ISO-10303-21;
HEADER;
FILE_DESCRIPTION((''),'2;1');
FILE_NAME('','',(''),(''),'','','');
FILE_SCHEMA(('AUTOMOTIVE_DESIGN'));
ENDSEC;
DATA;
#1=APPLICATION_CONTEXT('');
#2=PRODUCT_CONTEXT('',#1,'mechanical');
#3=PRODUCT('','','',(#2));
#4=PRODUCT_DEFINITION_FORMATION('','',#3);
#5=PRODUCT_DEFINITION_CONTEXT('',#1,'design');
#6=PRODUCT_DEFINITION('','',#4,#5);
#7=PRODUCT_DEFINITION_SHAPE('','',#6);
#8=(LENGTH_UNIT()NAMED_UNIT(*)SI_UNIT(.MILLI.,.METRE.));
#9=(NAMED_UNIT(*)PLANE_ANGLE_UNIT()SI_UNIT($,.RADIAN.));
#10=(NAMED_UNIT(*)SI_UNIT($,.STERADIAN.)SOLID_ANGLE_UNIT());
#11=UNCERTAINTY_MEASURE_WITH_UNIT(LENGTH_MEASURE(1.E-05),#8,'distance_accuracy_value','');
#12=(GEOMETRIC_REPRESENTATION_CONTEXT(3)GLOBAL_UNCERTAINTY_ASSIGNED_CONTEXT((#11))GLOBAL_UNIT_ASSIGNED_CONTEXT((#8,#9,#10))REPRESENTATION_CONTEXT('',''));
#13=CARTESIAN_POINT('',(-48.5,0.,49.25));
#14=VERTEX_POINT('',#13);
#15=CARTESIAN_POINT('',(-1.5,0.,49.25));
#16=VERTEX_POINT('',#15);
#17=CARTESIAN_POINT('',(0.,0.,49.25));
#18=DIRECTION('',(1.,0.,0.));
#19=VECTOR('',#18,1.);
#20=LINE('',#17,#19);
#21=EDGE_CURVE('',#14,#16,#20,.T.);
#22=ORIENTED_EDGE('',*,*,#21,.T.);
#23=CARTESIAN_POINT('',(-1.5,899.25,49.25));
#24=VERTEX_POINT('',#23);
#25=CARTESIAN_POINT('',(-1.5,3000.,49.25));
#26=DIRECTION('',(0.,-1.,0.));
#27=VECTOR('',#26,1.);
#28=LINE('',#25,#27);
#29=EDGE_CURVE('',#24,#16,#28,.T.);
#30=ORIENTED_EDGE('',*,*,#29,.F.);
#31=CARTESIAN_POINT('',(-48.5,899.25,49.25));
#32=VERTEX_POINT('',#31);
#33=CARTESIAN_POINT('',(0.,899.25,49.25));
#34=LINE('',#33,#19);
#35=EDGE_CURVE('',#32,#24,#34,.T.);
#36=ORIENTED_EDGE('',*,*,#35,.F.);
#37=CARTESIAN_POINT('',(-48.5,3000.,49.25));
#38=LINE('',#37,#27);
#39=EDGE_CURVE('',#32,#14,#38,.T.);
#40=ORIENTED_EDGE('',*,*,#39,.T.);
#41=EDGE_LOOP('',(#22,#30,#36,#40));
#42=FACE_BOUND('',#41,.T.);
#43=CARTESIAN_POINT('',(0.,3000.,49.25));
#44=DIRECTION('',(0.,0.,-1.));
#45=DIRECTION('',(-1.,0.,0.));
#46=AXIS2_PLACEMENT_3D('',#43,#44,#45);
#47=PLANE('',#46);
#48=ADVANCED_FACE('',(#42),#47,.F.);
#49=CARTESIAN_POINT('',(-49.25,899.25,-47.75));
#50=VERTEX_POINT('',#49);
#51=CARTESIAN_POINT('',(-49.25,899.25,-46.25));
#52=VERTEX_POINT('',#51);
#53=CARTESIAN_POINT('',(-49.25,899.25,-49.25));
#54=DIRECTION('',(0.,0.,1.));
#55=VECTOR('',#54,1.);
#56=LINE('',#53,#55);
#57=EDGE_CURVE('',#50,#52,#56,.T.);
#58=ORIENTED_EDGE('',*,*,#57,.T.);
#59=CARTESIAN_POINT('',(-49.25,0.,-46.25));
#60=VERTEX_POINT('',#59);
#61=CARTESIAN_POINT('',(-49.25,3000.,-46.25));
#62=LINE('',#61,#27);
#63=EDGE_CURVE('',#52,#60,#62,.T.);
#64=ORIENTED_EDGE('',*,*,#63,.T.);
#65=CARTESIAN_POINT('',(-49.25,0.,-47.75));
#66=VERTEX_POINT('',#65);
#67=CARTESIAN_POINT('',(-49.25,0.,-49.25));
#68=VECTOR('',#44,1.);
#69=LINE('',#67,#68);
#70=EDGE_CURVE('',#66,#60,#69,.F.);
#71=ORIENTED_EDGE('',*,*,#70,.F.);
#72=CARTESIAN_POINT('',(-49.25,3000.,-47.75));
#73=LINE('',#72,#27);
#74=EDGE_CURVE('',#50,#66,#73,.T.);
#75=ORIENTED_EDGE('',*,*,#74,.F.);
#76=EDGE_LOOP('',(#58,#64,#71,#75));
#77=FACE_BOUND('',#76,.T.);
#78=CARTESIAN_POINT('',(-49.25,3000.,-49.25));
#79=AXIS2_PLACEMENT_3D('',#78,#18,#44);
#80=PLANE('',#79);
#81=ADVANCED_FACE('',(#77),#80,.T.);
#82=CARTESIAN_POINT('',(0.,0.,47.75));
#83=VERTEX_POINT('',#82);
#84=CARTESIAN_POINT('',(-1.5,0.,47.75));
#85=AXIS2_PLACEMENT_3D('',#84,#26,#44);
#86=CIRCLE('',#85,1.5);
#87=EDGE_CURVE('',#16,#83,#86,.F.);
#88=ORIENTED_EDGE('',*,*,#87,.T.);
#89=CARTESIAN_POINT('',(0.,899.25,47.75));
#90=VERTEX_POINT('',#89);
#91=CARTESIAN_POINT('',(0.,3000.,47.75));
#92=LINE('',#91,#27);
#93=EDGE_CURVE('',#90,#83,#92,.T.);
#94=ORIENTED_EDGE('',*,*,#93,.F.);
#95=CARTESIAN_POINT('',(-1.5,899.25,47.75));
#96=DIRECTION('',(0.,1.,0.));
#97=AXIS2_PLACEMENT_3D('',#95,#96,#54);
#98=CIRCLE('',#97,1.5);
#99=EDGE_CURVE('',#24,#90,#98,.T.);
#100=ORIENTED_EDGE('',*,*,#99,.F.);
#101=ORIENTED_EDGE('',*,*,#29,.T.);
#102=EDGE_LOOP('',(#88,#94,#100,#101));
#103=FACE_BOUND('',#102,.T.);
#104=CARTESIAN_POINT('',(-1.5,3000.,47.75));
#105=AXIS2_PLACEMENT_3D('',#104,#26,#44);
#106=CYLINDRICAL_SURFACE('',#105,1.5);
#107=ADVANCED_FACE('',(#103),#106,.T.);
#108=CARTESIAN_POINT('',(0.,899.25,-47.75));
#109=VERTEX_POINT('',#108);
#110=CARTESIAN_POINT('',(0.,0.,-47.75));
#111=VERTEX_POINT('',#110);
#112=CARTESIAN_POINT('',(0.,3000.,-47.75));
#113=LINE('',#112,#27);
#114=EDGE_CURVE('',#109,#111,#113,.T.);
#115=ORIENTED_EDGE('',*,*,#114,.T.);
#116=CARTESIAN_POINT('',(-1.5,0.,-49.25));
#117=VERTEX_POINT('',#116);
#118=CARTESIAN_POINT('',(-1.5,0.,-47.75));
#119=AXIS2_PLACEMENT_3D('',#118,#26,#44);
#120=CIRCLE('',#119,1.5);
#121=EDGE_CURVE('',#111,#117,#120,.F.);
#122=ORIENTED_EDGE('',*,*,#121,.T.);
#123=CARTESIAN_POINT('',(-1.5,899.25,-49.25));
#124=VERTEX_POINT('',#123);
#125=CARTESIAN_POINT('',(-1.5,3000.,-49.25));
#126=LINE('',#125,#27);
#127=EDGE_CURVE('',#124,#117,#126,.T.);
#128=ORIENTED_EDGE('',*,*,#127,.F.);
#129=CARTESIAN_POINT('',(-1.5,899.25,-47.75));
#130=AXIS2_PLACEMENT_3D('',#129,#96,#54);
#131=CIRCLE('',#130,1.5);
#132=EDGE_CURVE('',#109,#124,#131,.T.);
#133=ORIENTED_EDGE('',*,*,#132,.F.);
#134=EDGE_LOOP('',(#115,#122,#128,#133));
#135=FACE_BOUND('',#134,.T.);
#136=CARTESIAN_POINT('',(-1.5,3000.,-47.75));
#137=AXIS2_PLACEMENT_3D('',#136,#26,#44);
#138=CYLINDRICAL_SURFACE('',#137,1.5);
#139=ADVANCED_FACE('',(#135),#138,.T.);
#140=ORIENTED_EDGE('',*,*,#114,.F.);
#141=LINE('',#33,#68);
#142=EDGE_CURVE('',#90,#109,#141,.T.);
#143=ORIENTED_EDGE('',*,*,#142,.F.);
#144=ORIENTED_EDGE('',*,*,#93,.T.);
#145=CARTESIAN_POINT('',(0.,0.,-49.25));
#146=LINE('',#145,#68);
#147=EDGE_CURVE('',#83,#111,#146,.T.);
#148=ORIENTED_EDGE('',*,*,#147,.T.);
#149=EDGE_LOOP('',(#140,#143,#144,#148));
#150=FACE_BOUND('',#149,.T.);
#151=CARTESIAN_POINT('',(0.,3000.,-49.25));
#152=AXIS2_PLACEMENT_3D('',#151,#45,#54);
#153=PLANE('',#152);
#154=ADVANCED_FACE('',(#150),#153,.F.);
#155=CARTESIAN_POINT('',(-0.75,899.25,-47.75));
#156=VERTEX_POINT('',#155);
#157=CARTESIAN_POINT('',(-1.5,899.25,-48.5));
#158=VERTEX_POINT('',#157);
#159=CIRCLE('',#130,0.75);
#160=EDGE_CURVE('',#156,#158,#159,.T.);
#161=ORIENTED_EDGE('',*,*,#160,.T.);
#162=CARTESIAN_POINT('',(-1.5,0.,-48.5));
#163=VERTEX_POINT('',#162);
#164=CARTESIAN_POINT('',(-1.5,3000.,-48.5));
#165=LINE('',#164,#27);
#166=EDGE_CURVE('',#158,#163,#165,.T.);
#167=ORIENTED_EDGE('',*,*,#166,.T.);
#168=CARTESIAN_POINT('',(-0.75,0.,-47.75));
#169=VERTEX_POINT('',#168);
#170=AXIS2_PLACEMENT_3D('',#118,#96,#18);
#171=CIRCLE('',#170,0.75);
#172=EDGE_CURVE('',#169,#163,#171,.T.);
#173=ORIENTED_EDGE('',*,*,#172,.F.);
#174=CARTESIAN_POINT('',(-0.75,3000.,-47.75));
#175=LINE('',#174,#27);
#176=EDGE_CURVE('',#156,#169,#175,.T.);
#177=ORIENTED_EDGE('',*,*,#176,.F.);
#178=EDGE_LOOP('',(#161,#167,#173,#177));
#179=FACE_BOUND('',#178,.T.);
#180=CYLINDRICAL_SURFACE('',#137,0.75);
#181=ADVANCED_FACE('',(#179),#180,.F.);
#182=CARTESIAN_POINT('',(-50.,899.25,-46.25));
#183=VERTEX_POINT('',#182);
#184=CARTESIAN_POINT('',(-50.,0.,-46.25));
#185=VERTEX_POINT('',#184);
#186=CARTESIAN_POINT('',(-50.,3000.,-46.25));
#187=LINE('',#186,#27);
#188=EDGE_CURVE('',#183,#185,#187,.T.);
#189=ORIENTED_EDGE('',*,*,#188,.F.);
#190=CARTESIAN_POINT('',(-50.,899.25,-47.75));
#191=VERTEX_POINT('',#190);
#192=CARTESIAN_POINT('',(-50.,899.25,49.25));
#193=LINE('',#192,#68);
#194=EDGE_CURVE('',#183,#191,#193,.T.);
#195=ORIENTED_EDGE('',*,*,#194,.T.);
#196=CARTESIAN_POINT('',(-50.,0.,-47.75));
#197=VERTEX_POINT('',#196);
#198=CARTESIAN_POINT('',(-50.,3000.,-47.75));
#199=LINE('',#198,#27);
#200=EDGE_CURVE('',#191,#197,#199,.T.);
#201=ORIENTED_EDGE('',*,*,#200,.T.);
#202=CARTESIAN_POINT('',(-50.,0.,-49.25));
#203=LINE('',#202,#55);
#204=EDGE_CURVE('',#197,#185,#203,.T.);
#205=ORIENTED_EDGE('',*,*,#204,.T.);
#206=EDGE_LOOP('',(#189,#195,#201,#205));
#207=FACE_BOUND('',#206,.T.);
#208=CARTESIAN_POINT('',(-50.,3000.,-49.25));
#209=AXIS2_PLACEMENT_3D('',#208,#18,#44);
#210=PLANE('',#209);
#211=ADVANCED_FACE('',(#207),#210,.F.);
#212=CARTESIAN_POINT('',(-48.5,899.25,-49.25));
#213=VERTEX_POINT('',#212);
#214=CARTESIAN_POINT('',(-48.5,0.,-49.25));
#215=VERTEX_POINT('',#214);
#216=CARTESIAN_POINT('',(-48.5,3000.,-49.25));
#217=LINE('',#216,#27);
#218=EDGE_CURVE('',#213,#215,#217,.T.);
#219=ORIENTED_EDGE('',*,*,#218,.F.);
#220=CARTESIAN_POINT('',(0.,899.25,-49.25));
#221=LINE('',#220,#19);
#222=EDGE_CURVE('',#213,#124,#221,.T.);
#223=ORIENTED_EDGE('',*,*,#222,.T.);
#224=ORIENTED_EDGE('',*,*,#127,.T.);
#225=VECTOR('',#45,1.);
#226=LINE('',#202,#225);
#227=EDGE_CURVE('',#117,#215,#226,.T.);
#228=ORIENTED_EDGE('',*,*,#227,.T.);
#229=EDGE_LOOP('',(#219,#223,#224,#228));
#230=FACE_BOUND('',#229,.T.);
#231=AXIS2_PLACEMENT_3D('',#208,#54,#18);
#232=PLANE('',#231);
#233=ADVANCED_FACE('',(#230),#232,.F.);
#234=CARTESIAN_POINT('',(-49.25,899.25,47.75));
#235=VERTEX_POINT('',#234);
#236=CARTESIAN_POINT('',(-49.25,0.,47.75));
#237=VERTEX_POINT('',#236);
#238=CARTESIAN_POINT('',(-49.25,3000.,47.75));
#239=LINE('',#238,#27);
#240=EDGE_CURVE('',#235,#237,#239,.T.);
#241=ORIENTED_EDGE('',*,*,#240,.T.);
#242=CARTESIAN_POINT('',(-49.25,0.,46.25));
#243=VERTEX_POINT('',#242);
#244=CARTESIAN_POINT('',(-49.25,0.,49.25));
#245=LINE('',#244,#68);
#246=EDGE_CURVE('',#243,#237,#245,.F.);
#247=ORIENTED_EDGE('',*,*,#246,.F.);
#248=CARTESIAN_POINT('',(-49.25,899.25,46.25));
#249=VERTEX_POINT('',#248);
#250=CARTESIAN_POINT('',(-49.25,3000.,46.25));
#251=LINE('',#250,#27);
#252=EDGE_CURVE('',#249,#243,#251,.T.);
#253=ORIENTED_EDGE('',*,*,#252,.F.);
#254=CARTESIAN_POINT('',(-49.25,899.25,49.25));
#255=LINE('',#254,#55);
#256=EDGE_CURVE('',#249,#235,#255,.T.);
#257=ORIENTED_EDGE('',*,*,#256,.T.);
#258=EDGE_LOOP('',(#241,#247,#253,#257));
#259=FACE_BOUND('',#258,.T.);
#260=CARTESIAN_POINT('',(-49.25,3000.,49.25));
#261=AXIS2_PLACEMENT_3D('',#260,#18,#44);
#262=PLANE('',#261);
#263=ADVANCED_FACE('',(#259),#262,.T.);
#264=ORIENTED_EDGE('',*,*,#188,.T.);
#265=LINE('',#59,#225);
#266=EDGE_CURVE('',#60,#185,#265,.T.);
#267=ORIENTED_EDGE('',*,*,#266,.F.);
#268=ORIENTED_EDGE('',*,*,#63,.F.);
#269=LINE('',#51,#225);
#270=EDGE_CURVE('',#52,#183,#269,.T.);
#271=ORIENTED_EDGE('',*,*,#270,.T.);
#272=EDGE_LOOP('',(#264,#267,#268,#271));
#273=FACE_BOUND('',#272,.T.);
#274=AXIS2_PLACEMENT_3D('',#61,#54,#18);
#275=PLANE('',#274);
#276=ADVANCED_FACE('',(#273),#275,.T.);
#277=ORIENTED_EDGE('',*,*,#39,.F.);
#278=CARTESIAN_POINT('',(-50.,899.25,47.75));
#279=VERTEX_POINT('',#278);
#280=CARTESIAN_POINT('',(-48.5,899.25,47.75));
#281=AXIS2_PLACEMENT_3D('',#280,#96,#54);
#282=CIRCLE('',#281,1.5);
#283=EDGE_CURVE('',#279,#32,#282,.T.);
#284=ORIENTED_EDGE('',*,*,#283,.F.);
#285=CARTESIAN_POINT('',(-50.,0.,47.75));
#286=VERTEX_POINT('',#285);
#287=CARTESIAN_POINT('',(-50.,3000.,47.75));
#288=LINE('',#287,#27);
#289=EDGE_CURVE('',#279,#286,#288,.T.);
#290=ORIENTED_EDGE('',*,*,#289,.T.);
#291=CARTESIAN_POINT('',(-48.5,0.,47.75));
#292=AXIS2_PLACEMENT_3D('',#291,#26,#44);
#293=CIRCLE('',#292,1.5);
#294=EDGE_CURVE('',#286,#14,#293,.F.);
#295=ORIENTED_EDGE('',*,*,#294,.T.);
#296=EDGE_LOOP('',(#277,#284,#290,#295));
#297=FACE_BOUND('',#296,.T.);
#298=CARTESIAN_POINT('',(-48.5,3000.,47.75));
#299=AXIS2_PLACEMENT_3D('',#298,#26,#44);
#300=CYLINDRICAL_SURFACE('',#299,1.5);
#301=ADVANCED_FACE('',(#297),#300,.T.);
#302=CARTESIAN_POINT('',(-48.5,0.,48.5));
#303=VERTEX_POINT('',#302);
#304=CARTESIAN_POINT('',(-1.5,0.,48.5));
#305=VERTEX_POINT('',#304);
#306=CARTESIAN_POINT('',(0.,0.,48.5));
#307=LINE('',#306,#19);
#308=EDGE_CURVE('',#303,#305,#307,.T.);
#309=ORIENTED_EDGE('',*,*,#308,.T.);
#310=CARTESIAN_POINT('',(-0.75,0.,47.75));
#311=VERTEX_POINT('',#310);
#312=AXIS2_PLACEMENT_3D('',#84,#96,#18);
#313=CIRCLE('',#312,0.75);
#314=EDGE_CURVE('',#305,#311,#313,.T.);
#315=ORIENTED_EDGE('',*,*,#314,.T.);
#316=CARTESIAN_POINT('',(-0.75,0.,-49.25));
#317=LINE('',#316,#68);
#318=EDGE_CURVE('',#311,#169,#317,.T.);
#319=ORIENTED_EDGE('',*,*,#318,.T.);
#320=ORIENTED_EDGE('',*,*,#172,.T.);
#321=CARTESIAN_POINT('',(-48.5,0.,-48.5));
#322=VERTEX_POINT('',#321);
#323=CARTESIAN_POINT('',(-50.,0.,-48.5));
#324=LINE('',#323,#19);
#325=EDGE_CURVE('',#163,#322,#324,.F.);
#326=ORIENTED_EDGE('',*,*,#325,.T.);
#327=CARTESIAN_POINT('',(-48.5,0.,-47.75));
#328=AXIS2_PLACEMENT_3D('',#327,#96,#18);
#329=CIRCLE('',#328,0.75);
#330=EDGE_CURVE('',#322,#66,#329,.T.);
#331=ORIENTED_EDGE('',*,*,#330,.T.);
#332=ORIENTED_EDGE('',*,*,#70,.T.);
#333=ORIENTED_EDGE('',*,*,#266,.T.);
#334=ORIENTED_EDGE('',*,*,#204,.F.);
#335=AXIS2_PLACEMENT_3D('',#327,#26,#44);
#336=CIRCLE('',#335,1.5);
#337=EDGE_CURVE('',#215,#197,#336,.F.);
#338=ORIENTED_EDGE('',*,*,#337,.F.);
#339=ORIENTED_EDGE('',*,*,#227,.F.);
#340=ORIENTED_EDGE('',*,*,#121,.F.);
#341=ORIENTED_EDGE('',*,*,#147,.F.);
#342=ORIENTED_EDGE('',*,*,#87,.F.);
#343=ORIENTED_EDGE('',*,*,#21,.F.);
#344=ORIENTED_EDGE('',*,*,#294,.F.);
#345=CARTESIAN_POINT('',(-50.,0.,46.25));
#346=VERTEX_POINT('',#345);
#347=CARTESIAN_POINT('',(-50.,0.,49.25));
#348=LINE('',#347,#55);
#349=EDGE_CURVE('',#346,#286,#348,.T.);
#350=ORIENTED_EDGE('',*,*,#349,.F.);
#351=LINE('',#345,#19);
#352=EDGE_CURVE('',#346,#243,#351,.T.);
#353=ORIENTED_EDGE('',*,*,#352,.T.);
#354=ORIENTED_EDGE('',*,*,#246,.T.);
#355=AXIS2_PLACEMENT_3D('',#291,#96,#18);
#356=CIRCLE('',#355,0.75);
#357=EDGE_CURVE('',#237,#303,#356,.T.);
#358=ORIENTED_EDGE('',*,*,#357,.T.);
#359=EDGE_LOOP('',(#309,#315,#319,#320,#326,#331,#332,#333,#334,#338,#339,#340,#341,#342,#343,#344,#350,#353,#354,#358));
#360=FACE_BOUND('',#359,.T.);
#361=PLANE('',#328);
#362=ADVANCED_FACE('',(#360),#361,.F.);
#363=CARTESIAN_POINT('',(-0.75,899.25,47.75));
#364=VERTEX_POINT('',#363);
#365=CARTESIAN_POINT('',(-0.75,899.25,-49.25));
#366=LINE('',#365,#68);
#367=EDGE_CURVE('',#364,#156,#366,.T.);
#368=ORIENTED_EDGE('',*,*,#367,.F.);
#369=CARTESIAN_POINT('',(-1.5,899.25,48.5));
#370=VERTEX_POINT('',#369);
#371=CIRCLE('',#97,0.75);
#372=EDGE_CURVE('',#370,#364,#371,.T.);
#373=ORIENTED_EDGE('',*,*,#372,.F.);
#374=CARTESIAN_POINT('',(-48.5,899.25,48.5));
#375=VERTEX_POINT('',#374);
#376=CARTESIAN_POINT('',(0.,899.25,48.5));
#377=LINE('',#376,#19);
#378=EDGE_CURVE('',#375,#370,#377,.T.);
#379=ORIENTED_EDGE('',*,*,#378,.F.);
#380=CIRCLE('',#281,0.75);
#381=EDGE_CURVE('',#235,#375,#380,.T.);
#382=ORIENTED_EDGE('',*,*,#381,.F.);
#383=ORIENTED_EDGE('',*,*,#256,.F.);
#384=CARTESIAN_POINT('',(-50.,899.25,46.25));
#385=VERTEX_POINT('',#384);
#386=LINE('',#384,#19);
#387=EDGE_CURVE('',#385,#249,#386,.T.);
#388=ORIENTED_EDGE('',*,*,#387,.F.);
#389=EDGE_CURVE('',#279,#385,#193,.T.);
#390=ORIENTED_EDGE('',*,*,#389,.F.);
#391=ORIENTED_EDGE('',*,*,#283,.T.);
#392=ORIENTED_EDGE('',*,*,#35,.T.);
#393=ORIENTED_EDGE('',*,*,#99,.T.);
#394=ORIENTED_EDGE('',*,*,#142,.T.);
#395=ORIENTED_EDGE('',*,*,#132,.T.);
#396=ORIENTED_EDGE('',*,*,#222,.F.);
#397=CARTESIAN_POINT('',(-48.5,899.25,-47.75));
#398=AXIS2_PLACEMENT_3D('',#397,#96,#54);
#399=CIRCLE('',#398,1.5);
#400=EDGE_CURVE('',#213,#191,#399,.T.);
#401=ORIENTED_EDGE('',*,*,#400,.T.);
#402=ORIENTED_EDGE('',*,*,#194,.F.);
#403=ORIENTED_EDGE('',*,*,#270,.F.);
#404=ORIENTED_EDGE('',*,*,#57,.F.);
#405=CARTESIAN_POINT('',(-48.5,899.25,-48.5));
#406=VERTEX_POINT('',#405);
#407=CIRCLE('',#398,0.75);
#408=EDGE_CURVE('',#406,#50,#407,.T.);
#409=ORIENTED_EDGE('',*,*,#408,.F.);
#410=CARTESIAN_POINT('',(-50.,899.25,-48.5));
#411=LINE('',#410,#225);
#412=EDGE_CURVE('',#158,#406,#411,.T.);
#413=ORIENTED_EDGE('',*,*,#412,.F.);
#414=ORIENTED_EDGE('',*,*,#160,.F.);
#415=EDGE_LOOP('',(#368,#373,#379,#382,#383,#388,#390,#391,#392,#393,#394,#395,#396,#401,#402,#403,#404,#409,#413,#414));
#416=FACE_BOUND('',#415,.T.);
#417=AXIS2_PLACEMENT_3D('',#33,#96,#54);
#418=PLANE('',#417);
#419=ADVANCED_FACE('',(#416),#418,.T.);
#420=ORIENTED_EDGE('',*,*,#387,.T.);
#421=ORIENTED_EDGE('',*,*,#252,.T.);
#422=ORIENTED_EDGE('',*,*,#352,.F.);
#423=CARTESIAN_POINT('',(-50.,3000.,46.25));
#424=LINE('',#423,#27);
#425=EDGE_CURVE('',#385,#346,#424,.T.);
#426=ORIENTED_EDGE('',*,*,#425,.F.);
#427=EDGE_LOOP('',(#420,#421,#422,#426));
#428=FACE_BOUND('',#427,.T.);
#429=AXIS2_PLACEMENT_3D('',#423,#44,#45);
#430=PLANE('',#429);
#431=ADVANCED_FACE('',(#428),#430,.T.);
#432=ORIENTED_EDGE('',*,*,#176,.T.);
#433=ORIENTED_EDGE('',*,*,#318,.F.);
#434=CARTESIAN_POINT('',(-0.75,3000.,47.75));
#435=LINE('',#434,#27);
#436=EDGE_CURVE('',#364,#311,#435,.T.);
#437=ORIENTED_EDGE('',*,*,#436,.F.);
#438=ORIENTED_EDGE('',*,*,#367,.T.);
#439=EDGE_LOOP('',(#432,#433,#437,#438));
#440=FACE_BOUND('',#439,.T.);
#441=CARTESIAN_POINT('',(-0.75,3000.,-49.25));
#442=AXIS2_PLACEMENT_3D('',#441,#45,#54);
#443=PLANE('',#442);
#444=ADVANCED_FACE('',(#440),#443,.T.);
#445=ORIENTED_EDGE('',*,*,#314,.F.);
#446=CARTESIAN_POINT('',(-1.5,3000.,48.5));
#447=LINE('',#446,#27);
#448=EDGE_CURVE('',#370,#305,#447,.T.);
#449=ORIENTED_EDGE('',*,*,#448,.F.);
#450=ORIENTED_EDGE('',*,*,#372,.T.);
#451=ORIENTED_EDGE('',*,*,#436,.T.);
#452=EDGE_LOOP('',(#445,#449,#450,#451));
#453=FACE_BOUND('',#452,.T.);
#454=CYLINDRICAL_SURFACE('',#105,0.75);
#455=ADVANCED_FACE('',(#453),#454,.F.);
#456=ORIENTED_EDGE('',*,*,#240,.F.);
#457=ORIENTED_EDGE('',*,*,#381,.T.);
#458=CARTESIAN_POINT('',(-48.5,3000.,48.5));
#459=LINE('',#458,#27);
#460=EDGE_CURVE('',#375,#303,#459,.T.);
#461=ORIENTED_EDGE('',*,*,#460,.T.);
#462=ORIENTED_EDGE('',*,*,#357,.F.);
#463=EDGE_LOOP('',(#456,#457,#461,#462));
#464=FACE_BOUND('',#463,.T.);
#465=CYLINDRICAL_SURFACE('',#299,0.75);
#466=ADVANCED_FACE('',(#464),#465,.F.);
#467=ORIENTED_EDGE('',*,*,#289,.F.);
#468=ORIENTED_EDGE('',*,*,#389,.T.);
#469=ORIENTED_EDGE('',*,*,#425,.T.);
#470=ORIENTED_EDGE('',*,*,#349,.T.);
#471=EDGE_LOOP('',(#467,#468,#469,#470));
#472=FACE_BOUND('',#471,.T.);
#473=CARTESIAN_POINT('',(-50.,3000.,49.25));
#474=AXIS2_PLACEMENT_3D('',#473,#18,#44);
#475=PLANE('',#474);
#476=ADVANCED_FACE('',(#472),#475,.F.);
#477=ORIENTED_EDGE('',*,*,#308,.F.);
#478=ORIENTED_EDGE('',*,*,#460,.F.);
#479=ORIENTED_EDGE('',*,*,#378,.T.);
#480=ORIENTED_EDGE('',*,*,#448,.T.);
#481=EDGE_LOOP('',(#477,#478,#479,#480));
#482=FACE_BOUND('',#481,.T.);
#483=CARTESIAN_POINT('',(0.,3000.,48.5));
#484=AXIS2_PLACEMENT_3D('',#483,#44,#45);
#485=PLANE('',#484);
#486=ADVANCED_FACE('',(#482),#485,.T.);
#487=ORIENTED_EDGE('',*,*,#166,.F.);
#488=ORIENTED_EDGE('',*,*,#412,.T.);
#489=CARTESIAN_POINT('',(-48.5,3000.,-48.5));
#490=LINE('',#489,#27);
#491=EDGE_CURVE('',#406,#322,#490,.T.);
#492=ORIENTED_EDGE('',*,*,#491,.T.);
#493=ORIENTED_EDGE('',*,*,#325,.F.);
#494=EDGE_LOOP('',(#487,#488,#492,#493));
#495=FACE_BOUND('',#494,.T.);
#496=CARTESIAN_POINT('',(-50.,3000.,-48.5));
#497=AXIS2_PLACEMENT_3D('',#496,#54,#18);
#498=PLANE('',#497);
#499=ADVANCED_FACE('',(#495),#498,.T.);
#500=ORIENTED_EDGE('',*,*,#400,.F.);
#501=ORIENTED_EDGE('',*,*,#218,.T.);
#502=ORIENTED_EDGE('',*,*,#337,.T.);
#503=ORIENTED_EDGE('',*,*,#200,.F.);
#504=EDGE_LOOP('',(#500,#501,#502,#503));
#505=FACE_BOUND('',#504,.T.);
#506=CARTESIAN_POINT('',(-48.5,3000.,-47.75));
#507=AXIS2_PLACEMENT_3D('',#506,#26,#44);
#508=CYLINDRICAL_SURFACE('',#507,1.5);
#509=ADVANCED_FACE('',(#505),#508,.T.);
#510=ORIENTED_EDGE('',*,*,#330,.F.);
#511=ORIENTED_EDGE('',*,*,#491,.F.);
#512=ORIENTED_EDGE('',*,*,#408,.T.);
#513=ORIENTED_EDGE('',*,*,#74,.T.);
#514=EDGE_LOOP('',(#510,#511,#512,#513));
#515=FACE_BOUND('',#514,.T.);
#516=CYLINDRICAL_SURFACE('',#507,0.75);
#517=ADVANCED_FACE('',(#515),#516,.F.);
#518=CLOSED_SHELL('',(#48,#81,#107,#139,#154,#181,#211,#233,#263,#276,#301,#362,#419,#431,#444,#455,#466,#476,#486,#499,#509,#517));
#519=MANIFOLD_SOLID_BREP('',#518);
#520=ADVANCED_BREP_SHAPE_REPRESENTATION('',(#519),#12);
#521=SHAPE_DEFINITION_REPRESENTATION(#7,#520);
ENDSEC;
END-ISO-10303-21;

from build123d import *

# Parameters (mm, degrees)
MOVE_BODY_2_DEPTH    = 3000
SKETCH_6_OUTSIDE_W   = 652.406
SKETCH_6_OUTSIDE_H   = 3602.406
SKETCH_6_OUTSIDE_W_2 = 50
SKETCH_6_OUTSIDE_H_2 = 899.25
CUT_EXTRUDE_1_DEPTH  = 3003.033019472


# Read off the part's stored shape, not the designer's step: Тело-Переместить/Копировать2
with BuildPart() as part:
    # Move Body 2 outline → Move Body 2 (new body)
    with BuildSketch(Plane(origin=(0, 0, 0), x_dir=(1, 0, 0), z_dir=(0, 1, 0))):
        with BuildLine():
            Line((-50, 47.75), (-50, 46.25))
            Line((-50, 46.25), (-49.25, 46.25))
            Line((-49.25, 46.25), (-49.25, 47.75))
            ThreePointArc((-49.25, 47.75), (-49.030330086, 48.280330086), (-48.5, 48.5))
            Line((-48.5, 48.5), (-1.5, 48.5))
            ThreePointArc((-1.5, 48.5), (-0.969669914, 48.280330086), (-0.75, 47.75))
            Line((-0.75, 47.75), (-0.75, -47.75))
            ThreePointArc((-0.75, -47.75), (-0.969669914, -48.280330086), (-1.5, -48.5))
            Line((-1.5, -48.5), (-48.5, -48.5))
            ThreePointArc((-48.5, -48.5), (-49.030330086, -48.280330086), (-49.25, -47.75))
            Line((-49.25, -47.75), (-49.25, -46.25))
            Line((-49.25, -46.25), (-50, -46.25))
            Line((-50, -46.25), (-50, -47.75))
            ThreePointArc((-50, -47.75), (-49.560660172, -48.810660172), (-48.5, -49.25))
            Line((-48.5, -49.25), (-1.5, -49.25))
            ThreePointArc((-1.5, -49.25), (-0.439339828, -48.810660172), (0, -47.75))
            Line((0, -47.75), (0, 47.75))
            ThreePointArc((0, 47.75), (-0.439339828, 48.810660172), (-1.5, 49.25))
            Line((-1.5, 49.25), (-48.5, 49.25))
            ThreePointArc((-48.5, 49.25), (-49.560660172, 48.810660172), (-50, 47.75))
        make_face()
    extrude(amount=MOVE_BODY_2_DEPTH)

    # Эскиз6 outside → Вырез-Вытянуть1 (cut, through all)
    with BuildSketch(Plane(origin=(0, 0, -49.25), x_dir=(-1, 0, 0), z_dir=(0, 0, -1))):
        with Locations((25, 1500)):
            Rectangle(SKETCH_6_OUTSIDE_W, SKETCH_6_OUTSIDE_H)
        with Locations((25, 449.625)):
            Rectangle(SKETCH_6_OUTSIDE_W_2, SKETCH_6_OUTSIDE_H_2, mode=Mode.SUBTRACT)
    extrude(amount=-CUT_EXTRUDE_1_DEPTH, mode=Mode.SUBTRACT)


solid = part.part
